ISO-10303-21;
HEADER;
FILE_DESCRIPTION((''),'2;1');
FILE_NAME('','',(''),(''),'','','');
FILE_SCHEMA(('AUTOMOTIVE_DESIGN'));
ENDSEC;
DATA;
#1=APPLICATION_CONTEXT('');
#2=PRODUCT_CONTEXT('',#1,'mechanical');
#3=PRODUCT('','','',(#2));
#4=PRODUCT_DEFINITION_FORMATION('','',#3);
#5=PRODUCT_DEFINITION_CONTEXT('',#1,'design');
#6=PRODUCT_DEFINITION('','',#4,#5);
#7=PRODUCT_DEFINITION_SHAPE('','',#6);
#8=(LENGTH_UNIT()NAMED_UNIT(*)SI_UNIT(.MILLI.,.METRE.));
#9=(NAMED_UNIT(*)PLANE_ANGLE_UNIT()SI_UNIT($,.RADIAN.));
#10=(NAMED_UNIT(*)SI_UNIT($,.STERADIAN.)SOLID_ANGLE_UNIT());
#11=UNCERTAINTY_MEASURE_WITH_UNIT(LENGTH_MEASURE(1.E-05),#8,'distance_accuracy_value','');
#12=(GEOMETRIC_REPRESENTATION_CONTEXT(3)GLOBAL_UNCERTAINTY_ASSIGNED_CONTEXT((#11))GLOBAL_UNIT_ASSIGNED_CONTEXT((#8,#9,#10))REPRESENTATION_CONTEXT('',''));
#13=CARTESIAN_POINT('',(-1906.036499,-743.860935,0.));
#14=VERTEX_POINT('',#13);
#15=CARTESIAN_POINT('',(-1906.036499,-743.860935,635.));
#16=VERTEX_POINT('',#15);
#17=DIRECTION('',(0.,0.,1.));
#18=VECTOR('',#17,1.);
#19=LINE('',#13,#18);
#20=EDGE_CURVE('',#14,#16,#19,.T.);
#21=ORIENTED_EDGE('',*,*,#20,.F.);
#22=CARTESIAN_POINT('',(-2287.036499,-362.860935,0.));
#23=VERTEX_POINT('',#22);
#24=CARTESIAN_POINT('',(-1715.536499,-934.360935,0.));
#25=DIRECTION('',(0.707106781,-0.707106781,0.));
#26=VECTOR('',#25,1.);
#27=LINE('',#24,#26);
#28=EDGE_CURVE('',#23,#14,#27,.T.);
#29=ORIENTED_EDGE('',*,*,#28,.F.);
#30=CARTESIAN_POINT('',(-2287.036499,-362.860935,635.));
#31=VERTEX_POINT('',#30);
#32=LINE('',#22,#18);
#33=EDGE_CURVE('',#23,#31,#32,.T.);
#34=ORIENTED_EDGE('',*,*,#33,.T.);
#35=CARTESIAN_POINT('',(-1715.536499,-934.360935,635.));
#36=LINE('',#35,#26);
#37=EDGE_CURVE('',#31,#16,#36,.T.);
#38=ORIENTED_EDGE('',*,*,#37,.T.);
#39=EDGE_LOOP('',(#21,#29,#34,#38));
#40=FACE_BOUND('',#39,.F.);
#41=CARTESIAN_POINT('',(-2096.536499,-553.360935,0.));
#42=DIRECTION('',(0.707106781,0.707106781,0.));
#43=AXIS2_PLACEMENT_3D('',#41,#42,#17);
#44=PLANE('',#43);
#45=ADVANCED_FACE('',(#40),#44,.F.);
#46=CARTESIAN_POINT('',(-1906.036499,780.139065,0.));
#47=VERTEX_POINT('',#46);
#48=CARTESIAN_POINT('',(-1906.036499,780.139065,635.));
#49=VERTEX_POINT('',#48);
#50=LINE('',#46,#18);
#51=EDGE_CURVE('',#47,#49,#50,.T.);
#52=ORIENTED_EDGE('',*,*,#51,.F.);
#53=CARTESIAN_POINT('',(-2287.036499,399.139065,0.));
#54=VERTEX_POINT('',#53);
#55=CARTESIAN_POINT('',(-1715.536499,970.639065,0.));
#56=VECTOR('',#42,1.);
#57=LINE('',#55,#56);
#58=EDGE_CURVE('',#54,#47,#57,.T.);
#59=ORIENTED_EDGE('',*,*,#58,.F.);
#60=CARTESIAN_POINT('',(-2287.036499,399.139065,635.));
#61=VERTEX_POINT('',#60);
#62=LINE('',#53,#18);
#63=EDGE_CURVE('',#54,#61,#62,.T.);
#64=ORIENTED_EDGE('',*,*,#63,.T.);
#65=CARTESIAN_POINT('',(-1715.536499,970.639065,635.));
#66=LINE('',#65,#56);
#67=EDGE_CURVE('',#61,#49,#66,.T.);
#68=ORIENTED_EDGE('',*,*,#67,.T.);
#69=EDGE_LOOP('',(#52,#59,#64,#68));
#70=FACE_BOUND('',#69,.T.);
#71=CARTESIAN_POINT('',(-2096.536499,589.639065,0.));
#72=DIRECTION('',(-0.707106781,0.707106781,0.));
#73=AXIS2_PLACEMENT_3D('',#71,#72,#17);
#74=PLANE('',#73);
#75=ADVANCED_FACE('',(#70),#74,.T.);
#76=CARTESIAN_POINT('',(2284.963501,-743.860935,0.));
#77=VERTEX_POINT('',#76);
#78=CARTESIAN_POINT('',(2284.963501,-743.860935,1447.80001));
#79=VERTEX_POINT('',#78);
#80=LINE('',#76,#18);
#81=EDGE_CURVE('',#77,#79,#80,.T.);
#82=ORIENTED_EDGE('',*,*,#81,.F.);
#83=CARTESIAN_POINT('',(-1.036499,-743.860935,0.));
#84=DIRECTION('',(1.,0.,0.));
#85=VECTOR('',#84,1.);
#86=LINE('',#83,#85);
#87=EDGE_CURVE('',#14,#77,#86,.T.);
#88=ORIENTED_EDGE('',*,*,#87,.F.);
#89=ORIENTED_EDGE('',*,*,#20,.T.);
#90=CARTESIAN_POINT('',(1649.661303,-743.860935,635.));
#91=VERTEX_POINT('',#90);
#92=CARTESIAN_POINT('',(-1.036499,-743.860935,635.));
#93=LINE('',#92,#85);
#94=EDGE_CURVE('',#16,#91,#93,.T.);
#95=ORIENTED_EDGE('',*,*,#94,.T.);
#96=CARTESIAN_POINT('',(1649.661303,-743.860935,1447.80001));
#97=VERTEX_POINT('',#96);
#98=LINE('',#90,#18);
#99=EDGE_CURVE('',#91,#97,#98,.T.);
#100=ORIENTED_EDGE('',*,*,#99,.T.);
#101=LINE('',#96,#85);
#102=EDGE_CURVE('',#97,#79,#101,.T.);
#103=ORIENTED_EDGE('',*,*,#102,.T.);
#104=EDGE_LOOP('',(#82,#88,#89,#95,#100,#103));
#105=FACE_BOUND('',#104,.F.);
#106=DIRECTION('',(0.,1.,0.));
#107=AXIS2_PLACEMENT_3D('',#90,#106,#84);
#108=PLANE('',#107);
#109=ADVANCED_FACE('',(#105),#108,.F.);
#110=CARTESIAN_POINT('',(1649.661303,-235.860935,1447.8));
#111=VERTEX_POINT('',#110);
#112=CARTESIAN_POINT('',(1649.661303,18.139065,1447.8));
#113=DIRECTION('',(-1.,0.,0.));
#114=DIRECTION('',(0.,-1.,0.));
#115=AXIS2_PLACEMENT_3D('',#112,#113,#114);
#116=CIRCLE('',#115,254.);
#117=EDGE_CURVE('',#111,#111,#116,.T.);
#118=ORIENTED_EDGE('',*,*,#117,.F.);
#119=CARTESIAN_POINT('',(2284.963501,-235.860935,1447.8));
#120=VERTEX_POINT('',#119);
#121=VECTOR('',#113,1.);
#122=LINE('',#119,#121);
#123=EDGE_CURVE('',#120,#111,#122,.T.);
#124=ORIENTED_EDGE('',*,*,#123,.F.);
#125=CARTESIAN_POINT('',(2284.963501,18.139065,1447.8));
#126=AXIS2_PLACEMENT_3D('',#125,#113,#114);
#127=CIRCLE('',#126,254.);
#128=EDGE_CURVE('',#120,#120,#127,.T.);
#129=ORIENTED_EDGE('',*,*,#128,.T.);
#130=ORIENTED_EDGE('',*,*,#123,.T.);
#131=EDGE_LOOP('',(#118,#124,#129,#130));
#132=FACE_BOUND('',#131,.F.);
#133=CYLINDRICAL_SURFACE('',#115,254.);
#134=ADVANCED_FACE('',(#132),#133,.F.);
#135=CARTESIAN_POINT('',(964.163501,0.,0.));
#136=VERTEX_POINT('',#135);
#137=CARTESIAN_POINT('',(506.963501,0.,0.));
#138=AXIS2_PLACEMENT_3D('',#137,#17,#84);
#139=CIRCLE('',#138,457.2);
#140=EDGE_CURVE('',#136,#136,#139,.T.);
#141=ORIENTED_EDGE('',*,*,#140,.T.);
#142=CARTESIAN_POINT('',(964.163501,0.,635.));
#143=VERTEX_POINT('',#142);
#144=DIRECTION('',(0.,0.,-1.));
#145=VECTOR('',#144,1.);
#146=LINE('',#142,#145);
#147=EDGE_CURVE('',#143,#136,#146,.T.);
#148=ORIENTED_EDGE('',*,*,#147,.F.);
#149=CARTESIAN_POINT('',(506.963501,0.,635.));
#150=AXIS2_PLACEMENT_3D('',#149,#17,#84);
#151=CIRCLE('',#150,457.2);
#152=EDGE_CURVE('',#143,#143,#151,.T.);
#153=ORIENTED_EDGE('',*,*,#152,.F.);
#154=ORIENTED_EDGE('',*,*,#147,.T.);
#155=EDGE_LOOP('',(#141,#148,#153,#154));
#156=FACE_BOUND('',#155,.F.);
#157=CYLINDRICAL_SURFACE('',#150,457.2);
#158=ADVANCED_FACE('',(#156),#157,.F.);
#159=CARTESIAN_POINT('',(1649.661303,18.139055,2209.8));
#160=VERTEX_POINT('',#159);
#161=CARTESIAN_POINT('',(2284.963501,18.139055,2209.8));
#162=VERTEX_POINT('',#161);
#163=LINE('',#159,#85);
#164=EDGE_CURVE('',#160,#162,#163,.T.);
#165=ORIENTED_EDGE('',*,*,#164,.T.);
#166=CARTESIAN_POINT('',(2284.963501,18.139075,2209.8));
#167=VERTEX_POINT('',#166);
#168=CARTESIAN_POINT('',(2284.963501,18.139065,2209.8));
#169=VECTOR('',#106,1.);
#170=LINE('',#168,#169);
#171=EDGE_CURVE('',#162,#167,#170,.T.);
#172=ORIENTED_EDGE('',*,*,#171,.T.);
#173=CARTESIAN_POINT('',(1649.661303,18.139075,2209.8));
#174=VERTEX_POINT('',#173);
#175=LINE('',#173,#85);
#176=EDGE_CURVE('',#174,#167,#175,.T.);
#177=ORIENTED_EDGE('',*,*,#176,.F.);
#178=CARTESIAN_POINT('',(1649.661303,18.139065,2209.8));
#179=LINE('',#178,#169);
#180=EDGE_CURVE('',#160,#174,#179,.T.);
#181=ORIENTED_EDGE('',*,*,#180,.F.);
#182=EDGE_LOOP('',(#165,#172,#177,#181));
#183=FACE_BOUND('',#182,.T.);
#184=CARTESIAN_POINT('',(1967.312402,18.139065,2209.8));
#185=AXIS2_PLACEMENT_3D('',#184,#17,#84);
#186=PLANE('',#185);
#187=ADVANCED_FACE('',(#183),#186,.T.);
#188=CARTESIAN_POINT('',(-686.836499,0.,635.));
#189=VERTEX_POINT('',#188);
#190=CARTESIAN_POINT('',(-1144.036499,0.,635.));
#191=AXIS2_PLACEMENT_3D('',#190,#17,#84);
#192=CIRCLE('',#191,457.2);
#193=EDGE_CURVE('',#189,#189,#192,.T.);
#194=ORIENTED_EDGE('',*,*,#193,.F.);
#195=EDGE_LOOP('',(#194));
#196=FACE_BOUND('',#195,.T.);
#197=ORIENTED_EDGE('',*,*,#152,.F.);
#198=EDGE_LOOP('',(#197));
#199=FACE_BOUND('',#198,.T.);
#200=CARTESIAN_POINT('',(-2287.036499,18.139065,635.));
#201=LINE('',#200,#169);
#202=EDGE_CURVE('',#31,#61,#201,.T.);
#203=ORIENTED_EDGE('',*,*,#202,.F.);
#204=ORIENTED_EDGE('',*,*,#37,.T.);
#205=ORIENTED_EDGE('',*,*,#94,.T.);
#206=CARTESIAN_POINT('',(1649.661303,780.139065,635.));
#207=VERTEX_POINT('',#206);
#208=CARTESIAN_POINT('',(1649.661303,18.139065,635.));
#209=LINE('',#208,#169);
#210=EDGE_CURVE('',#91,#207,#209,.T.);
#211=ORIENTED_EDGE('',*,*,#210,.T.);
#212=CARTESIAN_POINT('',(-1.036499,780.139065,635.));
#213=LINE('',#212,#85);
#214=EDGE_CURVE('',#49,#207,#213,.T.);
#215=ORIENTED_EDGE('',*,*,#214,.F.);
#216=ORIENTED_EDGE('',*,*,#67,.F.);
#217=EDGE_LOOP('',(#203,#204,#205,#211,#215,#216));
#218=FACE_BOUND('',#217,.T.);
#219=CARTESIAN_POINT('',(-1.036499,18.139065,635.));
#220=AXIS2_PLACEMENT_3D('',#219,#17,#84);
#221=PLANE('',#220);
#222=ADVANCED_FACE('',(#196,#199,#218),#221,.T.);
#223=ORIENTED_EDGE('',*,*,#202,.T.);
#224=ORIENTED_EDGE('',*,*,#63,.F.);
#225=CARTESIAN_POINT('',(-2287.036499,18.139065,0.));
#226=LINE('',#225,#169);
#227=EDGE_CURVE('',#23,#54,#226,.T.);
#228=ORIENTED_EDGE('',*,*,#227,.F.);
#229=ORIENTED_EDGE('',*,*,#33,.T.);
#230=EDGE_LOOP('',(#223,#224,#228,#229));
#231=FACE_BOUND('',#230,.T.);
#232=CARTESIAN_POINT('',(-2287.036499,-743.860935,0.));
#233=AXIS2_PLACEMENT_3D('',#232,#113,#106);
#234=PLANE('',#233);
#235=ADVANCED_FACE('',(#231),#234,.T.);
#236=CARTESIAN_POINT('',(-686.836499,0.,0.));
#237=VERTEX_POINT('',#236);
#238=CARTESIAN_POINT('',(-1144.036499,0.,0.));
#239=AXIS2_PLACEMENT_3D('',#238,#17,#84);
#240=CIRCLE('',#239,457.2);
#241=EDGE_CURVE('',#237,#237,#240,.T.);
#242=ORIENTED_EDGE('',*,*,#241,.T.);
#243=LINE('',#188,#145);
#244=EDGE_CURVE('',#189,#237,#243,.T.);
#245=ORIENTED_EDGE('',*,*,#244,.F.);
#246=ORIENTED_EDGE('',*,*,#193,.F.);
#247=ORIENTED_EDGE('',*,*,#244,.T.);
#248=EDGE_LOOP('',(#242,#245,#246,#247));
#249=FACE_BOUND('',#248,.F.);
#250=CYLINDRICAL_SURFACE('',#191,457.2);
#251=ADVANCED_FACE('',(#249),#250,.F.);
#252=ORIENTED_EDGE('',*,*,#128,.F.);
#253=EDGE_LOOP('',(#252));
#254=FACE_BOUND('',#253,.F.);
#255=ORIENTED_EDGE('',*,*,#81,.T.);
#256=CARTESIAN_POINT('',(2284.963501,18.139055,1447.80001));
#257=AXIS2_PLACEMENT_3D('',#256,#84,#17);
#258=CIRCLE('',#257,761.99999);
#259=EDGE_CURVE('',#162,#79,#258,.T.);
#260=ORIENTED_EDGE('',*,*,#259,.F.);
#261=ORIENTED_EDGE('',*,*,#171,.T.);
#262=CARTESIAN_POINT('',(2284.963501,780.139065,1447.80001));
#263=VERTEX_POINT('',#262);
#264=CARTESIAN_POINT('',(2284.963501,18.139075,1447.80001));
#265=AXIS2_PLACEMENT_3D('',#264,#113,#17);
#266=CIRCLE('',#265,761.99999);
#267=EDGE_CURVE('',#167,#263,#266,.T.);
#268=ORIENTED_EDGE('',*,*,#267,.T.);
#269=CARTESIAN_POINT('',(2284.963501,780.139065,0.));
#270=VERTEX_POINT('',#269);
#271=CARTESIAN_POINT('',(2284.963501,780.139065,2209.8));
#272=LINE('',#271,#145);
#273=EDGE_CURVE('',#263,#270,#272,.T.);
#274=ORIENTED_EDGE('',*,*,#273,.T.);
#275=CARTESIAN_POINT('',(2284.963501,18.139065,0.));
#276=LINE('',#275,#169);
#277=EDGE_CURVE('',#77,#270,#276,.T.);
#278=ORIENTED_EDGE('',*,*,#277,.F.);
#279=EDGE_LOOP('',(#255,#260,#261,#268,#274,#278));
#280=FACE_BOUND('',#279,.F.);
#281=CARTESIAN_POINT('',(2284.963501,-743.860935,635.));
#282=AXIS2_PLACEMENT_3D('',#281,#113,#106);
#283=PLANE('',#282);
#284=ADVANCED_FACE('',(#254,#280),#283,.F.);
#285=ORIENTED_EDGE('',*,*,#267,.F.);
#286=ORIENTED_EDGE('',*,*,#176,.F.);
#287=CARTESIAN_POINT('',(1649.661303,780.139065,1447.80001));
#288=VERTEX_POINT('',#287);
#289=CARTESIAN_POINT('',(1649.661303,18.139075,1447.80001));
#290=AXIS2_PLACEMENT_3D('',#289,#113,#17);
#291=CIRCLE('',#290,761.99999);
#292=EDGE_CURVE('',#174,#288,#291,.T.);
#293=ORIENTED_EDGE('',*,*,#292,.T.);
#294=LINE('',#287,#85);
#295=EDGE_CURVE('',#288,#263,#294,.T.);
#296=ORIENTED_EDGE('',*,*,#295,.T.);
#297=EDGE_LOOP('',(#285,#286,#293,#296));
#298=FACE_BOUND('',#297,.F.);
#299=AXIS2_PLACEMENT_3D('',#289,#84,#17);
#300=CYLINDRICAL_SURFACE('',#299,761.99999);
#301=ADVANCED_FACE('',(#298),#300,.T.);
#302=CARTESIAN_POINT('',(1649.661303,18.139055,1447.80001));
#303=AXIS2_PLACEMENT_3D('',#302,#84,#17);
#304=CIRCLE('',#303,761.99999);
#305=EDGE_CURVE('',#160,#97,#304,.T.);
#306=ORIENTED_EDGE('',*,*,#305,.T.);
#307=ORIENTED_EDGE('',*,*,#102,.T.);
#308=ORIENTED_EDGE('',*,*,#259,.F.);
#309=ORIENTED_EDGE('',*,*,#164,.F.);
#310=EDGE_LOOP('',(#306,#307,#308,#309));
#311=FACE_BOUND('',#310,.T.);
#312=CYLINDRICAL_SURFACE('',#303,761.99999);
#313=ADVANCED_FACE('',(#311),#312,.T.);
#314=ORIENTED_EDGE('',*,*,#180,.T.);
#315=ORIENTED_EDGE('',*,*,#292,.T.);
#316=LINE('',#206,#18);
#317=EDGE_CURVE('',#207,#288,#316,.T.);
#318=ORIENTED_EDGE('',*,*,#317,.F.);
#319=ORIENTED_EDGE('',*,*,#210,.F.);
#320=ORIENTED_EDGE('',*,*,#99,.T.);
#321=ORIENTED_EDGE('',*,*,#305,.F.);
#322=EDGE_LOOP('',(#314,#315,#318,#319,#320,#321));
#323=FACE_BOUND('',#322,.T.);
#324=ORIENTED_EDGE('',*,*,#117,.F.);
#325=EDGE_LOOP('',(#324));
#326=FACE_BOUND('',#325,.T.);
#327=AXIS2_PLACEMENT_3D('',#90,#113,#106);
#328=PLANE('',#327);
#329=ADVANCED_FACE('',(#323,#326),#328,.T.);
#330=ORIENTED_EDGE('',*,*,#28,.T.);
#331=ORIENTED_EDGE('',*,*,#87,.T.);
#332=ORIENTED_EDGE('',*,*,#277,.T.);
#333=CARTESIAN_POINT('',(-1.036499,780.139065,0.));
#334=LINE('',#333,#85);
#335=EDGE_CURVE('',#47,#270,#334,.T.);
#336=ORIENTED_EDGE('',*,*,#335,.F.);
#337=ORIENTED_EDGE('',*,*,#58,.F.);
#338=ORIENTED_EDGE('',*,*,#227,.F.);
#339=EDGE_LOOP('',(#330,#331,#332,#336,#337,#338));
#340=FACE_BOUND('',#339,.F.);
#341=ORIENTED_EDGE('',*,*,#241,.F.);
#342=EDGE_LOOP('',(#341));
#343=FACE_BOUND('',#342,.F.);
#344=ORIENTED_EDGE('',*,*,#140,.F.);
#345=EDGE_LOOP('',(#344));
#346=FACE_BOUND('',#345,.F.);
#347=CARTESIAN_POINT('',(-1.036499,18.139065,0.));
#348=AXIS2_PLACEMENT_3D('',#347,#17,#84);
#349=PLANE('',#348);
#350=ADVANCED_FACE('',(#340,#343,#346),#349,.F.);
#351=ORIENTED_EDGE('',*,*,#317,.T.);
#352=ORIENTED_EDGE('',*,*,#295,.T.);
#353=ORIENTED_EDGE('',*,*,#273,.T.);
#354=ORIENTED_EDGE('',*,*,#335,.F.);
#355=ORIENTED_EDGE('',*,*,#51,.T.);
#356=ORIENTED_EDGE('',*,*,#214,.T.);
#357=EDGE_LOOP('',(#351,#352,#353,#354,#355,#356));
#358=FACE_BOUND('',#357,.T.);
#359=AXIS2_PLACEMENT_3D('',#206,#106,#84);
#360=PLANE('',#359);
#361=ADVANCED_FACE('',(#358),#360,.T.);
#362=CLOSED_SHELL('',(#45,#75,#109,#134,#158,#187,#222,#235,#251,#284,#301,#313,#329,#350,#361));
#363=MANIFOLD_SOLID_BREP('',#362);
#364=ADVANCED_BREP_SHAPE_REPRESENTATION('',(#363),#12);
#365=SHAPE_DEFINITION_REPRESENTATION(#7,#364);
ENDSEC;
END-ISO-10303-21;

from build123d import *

# Parameters (mm, degrees)
F0_W     = 4572
F0_H     = 1524
F1_DEPTH = 635
F2_W     = 635.3021987379
F2_H     = 1524
F3_DEPTH = 1574.8
F4_R     = 761.99999
F5_R     = 457.2
F6_DEPTH = 889
F7_R     = 254
F8_DEPTH = 635
F9_DEPTH = 25.4
F10_SIZE = 381


# Not quite as in the source:
# - a fillet or chamfer is up to 0.001 mm smaller than in the source, because OpenCascade refuses the exact size


with BuildPart() as f1:
    # F0 (on Top) → F1 (new body)
    with BuildSketch(Plane.XY):
        with Locations((-1.0364986956, 18.1390648085)):
            Rectangle(F0_W, F0_H)
    extrude(amount=F1_DEPTH)

    # F2 (on face) → F3 (join)
    with BuildSketch(Plane.XY.offset(635)):
        with Locations((1967.3124019355, 18.1390648085)):
            Rectangle(F2_W, F2_H)
    extrude(amount=F3_DEPTH)

    # F4 (radius 762 in the source; OpenCascade refuses exactly that, so slightly less here)
    f4_edges = [f1.edges().sort_by_distance(p)[0] for p in [
        (1967.312402, 780.139065, 2209.8),
        (1967.312402, -743.860935, 2209.8),
    ]]
    fillet(f4_edges, radius=F4_R)

    # F5 (on face) → F6 (cut)
    with BuildSketch(Plane.XY.offset(635)):
        with Locations((-1144.0364986956, 0)):
            Circle(F5_R)
        with Locations((506.9635013044, 0)):
            Circle(F5_R)
    extrude(amount=-F6_DEPTH, mode=Mode.SUBTRACT)

    # F7 (on face) → F8 (cut)
    with BuildSketch(Plane(origin=(1649.6613025665, 0, 0), x_dir=(0, -1, 0), z_dir=(-1, 0, 0))):
        with Locations((-18.1390648085, 1447.8)):
            Circle(F7_R)
    extrude(amount=-F8_DEPTH, mode=Mode.SUBTRACT)

    # F9 (cut): a face of the model
    f9_faces = [f1.faces().sort_by_distance(p)[0] for p in [
        (2284.6613025665, 18.1390648085, 1447.8),
    ]]
    extrude(f9_faces, amount=-F9_DEPTH, mode=Mode.SUBTRACT)

    # F10
    f10_edges = [f1.edges().sort_by_distance(p)[0] for p in [
        (-2287.036499, -743.860935, 317.5),
        (-2287.036499, 780.139065, 317.5),
    ]]
    chamfer(f10_edges, length=F10_SIZE)


solid = f1.part
